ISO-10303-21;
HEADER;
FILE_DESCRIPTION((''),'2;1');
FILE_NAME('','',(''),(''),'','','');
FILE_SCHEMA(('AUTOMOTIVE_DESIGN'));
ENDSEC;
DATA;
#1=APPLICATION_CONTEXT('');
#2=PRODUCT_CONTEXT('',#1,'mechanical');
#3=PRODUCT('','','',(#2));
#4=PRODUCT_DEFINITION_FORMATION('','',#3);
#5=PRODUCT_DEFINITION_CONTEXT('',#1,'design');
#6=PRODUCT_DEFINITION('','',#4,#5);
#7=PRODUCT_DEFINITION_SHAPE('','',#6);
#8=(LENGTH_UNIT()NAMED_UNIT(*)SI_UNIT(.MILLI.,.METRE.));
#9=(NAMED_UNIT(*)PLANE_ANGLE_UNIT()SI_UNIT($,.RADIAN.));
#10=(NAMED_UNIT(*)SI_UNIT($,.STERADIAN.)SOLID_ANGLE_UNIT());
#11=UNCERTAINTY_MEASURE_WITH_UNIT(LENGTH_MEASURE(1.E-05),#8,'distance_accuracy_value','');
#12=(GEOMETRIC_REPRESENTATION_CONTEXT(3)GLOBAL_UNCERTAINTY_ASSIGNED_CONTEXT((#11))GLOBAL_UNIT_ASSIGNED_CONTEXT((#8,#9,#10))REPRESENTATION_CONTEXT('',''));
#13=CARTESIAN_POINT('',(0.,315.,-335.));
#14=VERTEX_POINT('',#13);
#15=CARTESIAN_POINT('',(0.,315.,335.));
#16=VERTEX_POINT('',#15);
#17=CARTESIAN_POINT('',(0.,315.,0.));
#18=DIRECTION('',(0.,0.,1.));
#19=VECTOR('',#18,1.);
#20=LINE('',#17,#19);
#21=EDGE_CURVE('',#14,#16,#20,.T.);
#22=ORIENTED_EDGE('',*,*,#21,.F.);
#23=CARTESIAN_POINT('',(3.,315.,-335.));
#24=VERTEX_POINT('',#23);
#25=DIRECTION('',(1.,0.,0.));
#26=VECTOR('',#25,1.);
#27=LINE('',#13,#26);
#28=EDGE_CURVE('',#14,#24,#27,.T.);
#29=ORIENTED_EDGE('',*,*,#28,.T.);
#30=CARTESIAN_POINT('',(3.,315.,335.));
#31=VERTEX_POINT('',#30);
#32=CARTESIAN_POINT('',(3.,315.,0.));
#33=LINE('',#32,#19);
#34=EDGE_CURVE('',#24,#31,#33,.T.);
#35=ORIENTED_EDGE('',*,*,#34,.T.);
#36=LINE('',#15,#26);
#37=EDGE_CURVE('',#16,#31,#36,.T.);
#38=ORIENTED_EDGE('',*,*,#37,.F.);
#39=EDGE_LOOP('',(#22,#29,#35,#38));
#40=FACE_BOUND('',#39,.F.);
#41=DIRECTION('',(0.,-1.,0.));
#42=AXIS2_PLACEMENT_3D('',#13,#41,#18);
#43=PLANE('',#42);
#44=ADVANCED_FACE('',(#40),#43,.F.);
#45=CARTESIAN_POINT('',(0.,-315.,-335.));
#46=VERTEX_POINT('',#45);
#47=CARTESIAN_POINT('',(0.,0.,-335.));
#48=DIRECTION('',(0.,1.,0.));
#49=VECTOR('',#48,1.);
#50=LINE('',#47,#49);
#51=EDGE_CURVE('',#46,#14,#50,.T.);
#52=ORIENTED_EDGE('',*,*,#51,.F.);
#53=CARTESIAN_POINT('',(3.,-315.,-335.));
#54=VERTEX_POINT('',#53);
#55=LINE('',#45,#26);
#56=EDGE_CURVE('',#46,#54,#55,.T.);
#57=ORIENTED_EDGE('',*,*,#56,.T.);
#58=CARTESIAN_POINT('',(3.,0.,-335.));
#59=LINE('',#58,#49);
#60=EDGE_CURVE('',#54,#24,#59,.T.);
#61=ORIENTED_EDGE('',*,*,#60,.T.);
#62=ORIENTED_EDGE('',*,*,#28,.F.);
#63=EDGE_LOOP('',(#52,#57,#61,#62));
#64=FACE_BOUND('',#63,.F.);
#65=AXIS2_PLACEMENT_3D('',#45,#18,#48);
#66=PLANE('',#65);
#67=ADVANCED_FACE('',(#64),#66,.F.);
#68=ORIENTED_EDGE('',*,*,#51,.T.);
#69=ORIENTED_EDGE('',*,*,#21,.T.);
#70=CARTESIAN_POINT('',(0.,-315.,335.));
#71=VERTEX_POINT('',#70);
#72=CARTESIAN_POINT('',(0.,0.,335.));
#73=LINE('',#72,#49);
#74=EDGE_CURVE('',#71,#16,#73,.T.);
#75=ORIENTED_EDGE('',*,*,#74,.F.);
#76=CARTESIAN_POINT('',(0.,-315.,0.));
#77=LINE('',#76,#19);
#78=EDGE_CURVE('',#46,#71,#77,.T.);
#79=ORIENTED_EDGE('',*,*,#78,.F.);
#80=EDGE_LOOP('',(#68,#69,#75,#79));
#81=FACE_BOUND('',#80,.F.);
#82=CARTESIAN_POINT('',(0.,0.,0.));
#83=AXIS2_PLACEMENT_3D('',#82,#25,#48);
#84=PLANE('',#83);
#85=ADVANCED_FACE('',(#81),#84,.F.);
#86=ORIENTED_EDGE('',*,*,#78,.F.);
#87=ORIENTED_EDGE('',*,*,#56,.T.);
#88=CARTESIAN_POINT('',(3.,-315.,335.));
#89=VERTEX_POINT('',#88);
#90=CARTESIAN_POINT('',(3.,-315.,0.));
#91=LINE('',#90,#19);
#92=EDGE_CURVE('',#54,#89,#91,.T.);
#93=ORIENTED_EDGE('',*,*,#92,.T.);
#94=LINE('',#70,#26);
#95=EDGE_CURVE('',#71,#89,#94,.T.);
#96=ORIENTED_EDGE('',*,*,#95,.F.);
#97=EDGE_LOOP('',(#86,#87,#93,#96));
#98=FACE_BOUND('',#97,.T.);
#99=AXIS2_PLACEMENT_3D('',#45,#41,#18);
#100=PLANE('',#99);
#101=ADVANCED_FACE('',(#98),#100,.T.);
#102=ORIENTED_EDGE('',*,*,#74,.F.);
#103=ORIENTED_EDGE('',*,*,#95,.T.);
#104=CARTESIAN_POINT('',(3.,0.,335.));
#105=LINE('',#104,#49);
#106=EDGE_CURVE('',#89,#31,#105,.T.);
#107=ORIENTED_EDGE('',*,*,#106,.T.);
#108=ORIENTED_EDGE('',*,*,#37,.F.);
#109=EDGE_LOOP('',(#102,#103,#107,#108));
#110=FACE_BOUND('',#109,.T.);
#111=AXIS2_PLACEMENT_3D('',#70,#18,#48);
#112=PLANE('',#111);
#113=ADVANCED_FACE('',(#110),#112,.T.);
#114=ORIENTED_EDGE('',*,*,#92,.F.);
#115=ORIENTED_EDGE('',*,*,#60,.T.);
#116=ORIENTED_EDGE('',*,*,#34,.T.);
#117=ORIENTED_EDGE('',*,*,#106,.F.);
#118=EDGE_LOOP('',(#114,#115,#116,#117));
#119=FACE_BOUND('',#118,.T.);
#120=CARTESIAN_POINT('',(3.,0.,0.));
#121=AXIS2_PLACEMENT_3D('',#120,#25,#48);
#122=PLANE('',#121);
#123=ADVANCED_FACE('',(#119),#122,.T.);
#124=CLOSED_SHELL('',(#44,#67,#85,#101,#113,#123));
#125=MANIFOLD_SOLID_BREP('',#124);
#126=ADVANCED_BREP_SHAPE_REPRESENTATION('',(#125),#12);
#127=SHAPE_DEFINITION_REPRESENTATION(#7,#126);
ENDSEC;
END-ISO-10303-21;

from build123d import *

# Parameters (mm, degrees)
F0_W     = 630
F0_H     = 670
F1_DEPTH = 3


# Not quite as in the source:
# - the program builds the solid bodies; features that only make, move or delete a surface that nothing else refers to are left out


with BuildPart() as f1:
    # F0 (on Right) → F1 (new body)
    with BuildSketch(Plane.YZ):
        Rectangle(F0_W, F0_H)
    extrude(amount=F1_DEPTH)


solid = f1.part
